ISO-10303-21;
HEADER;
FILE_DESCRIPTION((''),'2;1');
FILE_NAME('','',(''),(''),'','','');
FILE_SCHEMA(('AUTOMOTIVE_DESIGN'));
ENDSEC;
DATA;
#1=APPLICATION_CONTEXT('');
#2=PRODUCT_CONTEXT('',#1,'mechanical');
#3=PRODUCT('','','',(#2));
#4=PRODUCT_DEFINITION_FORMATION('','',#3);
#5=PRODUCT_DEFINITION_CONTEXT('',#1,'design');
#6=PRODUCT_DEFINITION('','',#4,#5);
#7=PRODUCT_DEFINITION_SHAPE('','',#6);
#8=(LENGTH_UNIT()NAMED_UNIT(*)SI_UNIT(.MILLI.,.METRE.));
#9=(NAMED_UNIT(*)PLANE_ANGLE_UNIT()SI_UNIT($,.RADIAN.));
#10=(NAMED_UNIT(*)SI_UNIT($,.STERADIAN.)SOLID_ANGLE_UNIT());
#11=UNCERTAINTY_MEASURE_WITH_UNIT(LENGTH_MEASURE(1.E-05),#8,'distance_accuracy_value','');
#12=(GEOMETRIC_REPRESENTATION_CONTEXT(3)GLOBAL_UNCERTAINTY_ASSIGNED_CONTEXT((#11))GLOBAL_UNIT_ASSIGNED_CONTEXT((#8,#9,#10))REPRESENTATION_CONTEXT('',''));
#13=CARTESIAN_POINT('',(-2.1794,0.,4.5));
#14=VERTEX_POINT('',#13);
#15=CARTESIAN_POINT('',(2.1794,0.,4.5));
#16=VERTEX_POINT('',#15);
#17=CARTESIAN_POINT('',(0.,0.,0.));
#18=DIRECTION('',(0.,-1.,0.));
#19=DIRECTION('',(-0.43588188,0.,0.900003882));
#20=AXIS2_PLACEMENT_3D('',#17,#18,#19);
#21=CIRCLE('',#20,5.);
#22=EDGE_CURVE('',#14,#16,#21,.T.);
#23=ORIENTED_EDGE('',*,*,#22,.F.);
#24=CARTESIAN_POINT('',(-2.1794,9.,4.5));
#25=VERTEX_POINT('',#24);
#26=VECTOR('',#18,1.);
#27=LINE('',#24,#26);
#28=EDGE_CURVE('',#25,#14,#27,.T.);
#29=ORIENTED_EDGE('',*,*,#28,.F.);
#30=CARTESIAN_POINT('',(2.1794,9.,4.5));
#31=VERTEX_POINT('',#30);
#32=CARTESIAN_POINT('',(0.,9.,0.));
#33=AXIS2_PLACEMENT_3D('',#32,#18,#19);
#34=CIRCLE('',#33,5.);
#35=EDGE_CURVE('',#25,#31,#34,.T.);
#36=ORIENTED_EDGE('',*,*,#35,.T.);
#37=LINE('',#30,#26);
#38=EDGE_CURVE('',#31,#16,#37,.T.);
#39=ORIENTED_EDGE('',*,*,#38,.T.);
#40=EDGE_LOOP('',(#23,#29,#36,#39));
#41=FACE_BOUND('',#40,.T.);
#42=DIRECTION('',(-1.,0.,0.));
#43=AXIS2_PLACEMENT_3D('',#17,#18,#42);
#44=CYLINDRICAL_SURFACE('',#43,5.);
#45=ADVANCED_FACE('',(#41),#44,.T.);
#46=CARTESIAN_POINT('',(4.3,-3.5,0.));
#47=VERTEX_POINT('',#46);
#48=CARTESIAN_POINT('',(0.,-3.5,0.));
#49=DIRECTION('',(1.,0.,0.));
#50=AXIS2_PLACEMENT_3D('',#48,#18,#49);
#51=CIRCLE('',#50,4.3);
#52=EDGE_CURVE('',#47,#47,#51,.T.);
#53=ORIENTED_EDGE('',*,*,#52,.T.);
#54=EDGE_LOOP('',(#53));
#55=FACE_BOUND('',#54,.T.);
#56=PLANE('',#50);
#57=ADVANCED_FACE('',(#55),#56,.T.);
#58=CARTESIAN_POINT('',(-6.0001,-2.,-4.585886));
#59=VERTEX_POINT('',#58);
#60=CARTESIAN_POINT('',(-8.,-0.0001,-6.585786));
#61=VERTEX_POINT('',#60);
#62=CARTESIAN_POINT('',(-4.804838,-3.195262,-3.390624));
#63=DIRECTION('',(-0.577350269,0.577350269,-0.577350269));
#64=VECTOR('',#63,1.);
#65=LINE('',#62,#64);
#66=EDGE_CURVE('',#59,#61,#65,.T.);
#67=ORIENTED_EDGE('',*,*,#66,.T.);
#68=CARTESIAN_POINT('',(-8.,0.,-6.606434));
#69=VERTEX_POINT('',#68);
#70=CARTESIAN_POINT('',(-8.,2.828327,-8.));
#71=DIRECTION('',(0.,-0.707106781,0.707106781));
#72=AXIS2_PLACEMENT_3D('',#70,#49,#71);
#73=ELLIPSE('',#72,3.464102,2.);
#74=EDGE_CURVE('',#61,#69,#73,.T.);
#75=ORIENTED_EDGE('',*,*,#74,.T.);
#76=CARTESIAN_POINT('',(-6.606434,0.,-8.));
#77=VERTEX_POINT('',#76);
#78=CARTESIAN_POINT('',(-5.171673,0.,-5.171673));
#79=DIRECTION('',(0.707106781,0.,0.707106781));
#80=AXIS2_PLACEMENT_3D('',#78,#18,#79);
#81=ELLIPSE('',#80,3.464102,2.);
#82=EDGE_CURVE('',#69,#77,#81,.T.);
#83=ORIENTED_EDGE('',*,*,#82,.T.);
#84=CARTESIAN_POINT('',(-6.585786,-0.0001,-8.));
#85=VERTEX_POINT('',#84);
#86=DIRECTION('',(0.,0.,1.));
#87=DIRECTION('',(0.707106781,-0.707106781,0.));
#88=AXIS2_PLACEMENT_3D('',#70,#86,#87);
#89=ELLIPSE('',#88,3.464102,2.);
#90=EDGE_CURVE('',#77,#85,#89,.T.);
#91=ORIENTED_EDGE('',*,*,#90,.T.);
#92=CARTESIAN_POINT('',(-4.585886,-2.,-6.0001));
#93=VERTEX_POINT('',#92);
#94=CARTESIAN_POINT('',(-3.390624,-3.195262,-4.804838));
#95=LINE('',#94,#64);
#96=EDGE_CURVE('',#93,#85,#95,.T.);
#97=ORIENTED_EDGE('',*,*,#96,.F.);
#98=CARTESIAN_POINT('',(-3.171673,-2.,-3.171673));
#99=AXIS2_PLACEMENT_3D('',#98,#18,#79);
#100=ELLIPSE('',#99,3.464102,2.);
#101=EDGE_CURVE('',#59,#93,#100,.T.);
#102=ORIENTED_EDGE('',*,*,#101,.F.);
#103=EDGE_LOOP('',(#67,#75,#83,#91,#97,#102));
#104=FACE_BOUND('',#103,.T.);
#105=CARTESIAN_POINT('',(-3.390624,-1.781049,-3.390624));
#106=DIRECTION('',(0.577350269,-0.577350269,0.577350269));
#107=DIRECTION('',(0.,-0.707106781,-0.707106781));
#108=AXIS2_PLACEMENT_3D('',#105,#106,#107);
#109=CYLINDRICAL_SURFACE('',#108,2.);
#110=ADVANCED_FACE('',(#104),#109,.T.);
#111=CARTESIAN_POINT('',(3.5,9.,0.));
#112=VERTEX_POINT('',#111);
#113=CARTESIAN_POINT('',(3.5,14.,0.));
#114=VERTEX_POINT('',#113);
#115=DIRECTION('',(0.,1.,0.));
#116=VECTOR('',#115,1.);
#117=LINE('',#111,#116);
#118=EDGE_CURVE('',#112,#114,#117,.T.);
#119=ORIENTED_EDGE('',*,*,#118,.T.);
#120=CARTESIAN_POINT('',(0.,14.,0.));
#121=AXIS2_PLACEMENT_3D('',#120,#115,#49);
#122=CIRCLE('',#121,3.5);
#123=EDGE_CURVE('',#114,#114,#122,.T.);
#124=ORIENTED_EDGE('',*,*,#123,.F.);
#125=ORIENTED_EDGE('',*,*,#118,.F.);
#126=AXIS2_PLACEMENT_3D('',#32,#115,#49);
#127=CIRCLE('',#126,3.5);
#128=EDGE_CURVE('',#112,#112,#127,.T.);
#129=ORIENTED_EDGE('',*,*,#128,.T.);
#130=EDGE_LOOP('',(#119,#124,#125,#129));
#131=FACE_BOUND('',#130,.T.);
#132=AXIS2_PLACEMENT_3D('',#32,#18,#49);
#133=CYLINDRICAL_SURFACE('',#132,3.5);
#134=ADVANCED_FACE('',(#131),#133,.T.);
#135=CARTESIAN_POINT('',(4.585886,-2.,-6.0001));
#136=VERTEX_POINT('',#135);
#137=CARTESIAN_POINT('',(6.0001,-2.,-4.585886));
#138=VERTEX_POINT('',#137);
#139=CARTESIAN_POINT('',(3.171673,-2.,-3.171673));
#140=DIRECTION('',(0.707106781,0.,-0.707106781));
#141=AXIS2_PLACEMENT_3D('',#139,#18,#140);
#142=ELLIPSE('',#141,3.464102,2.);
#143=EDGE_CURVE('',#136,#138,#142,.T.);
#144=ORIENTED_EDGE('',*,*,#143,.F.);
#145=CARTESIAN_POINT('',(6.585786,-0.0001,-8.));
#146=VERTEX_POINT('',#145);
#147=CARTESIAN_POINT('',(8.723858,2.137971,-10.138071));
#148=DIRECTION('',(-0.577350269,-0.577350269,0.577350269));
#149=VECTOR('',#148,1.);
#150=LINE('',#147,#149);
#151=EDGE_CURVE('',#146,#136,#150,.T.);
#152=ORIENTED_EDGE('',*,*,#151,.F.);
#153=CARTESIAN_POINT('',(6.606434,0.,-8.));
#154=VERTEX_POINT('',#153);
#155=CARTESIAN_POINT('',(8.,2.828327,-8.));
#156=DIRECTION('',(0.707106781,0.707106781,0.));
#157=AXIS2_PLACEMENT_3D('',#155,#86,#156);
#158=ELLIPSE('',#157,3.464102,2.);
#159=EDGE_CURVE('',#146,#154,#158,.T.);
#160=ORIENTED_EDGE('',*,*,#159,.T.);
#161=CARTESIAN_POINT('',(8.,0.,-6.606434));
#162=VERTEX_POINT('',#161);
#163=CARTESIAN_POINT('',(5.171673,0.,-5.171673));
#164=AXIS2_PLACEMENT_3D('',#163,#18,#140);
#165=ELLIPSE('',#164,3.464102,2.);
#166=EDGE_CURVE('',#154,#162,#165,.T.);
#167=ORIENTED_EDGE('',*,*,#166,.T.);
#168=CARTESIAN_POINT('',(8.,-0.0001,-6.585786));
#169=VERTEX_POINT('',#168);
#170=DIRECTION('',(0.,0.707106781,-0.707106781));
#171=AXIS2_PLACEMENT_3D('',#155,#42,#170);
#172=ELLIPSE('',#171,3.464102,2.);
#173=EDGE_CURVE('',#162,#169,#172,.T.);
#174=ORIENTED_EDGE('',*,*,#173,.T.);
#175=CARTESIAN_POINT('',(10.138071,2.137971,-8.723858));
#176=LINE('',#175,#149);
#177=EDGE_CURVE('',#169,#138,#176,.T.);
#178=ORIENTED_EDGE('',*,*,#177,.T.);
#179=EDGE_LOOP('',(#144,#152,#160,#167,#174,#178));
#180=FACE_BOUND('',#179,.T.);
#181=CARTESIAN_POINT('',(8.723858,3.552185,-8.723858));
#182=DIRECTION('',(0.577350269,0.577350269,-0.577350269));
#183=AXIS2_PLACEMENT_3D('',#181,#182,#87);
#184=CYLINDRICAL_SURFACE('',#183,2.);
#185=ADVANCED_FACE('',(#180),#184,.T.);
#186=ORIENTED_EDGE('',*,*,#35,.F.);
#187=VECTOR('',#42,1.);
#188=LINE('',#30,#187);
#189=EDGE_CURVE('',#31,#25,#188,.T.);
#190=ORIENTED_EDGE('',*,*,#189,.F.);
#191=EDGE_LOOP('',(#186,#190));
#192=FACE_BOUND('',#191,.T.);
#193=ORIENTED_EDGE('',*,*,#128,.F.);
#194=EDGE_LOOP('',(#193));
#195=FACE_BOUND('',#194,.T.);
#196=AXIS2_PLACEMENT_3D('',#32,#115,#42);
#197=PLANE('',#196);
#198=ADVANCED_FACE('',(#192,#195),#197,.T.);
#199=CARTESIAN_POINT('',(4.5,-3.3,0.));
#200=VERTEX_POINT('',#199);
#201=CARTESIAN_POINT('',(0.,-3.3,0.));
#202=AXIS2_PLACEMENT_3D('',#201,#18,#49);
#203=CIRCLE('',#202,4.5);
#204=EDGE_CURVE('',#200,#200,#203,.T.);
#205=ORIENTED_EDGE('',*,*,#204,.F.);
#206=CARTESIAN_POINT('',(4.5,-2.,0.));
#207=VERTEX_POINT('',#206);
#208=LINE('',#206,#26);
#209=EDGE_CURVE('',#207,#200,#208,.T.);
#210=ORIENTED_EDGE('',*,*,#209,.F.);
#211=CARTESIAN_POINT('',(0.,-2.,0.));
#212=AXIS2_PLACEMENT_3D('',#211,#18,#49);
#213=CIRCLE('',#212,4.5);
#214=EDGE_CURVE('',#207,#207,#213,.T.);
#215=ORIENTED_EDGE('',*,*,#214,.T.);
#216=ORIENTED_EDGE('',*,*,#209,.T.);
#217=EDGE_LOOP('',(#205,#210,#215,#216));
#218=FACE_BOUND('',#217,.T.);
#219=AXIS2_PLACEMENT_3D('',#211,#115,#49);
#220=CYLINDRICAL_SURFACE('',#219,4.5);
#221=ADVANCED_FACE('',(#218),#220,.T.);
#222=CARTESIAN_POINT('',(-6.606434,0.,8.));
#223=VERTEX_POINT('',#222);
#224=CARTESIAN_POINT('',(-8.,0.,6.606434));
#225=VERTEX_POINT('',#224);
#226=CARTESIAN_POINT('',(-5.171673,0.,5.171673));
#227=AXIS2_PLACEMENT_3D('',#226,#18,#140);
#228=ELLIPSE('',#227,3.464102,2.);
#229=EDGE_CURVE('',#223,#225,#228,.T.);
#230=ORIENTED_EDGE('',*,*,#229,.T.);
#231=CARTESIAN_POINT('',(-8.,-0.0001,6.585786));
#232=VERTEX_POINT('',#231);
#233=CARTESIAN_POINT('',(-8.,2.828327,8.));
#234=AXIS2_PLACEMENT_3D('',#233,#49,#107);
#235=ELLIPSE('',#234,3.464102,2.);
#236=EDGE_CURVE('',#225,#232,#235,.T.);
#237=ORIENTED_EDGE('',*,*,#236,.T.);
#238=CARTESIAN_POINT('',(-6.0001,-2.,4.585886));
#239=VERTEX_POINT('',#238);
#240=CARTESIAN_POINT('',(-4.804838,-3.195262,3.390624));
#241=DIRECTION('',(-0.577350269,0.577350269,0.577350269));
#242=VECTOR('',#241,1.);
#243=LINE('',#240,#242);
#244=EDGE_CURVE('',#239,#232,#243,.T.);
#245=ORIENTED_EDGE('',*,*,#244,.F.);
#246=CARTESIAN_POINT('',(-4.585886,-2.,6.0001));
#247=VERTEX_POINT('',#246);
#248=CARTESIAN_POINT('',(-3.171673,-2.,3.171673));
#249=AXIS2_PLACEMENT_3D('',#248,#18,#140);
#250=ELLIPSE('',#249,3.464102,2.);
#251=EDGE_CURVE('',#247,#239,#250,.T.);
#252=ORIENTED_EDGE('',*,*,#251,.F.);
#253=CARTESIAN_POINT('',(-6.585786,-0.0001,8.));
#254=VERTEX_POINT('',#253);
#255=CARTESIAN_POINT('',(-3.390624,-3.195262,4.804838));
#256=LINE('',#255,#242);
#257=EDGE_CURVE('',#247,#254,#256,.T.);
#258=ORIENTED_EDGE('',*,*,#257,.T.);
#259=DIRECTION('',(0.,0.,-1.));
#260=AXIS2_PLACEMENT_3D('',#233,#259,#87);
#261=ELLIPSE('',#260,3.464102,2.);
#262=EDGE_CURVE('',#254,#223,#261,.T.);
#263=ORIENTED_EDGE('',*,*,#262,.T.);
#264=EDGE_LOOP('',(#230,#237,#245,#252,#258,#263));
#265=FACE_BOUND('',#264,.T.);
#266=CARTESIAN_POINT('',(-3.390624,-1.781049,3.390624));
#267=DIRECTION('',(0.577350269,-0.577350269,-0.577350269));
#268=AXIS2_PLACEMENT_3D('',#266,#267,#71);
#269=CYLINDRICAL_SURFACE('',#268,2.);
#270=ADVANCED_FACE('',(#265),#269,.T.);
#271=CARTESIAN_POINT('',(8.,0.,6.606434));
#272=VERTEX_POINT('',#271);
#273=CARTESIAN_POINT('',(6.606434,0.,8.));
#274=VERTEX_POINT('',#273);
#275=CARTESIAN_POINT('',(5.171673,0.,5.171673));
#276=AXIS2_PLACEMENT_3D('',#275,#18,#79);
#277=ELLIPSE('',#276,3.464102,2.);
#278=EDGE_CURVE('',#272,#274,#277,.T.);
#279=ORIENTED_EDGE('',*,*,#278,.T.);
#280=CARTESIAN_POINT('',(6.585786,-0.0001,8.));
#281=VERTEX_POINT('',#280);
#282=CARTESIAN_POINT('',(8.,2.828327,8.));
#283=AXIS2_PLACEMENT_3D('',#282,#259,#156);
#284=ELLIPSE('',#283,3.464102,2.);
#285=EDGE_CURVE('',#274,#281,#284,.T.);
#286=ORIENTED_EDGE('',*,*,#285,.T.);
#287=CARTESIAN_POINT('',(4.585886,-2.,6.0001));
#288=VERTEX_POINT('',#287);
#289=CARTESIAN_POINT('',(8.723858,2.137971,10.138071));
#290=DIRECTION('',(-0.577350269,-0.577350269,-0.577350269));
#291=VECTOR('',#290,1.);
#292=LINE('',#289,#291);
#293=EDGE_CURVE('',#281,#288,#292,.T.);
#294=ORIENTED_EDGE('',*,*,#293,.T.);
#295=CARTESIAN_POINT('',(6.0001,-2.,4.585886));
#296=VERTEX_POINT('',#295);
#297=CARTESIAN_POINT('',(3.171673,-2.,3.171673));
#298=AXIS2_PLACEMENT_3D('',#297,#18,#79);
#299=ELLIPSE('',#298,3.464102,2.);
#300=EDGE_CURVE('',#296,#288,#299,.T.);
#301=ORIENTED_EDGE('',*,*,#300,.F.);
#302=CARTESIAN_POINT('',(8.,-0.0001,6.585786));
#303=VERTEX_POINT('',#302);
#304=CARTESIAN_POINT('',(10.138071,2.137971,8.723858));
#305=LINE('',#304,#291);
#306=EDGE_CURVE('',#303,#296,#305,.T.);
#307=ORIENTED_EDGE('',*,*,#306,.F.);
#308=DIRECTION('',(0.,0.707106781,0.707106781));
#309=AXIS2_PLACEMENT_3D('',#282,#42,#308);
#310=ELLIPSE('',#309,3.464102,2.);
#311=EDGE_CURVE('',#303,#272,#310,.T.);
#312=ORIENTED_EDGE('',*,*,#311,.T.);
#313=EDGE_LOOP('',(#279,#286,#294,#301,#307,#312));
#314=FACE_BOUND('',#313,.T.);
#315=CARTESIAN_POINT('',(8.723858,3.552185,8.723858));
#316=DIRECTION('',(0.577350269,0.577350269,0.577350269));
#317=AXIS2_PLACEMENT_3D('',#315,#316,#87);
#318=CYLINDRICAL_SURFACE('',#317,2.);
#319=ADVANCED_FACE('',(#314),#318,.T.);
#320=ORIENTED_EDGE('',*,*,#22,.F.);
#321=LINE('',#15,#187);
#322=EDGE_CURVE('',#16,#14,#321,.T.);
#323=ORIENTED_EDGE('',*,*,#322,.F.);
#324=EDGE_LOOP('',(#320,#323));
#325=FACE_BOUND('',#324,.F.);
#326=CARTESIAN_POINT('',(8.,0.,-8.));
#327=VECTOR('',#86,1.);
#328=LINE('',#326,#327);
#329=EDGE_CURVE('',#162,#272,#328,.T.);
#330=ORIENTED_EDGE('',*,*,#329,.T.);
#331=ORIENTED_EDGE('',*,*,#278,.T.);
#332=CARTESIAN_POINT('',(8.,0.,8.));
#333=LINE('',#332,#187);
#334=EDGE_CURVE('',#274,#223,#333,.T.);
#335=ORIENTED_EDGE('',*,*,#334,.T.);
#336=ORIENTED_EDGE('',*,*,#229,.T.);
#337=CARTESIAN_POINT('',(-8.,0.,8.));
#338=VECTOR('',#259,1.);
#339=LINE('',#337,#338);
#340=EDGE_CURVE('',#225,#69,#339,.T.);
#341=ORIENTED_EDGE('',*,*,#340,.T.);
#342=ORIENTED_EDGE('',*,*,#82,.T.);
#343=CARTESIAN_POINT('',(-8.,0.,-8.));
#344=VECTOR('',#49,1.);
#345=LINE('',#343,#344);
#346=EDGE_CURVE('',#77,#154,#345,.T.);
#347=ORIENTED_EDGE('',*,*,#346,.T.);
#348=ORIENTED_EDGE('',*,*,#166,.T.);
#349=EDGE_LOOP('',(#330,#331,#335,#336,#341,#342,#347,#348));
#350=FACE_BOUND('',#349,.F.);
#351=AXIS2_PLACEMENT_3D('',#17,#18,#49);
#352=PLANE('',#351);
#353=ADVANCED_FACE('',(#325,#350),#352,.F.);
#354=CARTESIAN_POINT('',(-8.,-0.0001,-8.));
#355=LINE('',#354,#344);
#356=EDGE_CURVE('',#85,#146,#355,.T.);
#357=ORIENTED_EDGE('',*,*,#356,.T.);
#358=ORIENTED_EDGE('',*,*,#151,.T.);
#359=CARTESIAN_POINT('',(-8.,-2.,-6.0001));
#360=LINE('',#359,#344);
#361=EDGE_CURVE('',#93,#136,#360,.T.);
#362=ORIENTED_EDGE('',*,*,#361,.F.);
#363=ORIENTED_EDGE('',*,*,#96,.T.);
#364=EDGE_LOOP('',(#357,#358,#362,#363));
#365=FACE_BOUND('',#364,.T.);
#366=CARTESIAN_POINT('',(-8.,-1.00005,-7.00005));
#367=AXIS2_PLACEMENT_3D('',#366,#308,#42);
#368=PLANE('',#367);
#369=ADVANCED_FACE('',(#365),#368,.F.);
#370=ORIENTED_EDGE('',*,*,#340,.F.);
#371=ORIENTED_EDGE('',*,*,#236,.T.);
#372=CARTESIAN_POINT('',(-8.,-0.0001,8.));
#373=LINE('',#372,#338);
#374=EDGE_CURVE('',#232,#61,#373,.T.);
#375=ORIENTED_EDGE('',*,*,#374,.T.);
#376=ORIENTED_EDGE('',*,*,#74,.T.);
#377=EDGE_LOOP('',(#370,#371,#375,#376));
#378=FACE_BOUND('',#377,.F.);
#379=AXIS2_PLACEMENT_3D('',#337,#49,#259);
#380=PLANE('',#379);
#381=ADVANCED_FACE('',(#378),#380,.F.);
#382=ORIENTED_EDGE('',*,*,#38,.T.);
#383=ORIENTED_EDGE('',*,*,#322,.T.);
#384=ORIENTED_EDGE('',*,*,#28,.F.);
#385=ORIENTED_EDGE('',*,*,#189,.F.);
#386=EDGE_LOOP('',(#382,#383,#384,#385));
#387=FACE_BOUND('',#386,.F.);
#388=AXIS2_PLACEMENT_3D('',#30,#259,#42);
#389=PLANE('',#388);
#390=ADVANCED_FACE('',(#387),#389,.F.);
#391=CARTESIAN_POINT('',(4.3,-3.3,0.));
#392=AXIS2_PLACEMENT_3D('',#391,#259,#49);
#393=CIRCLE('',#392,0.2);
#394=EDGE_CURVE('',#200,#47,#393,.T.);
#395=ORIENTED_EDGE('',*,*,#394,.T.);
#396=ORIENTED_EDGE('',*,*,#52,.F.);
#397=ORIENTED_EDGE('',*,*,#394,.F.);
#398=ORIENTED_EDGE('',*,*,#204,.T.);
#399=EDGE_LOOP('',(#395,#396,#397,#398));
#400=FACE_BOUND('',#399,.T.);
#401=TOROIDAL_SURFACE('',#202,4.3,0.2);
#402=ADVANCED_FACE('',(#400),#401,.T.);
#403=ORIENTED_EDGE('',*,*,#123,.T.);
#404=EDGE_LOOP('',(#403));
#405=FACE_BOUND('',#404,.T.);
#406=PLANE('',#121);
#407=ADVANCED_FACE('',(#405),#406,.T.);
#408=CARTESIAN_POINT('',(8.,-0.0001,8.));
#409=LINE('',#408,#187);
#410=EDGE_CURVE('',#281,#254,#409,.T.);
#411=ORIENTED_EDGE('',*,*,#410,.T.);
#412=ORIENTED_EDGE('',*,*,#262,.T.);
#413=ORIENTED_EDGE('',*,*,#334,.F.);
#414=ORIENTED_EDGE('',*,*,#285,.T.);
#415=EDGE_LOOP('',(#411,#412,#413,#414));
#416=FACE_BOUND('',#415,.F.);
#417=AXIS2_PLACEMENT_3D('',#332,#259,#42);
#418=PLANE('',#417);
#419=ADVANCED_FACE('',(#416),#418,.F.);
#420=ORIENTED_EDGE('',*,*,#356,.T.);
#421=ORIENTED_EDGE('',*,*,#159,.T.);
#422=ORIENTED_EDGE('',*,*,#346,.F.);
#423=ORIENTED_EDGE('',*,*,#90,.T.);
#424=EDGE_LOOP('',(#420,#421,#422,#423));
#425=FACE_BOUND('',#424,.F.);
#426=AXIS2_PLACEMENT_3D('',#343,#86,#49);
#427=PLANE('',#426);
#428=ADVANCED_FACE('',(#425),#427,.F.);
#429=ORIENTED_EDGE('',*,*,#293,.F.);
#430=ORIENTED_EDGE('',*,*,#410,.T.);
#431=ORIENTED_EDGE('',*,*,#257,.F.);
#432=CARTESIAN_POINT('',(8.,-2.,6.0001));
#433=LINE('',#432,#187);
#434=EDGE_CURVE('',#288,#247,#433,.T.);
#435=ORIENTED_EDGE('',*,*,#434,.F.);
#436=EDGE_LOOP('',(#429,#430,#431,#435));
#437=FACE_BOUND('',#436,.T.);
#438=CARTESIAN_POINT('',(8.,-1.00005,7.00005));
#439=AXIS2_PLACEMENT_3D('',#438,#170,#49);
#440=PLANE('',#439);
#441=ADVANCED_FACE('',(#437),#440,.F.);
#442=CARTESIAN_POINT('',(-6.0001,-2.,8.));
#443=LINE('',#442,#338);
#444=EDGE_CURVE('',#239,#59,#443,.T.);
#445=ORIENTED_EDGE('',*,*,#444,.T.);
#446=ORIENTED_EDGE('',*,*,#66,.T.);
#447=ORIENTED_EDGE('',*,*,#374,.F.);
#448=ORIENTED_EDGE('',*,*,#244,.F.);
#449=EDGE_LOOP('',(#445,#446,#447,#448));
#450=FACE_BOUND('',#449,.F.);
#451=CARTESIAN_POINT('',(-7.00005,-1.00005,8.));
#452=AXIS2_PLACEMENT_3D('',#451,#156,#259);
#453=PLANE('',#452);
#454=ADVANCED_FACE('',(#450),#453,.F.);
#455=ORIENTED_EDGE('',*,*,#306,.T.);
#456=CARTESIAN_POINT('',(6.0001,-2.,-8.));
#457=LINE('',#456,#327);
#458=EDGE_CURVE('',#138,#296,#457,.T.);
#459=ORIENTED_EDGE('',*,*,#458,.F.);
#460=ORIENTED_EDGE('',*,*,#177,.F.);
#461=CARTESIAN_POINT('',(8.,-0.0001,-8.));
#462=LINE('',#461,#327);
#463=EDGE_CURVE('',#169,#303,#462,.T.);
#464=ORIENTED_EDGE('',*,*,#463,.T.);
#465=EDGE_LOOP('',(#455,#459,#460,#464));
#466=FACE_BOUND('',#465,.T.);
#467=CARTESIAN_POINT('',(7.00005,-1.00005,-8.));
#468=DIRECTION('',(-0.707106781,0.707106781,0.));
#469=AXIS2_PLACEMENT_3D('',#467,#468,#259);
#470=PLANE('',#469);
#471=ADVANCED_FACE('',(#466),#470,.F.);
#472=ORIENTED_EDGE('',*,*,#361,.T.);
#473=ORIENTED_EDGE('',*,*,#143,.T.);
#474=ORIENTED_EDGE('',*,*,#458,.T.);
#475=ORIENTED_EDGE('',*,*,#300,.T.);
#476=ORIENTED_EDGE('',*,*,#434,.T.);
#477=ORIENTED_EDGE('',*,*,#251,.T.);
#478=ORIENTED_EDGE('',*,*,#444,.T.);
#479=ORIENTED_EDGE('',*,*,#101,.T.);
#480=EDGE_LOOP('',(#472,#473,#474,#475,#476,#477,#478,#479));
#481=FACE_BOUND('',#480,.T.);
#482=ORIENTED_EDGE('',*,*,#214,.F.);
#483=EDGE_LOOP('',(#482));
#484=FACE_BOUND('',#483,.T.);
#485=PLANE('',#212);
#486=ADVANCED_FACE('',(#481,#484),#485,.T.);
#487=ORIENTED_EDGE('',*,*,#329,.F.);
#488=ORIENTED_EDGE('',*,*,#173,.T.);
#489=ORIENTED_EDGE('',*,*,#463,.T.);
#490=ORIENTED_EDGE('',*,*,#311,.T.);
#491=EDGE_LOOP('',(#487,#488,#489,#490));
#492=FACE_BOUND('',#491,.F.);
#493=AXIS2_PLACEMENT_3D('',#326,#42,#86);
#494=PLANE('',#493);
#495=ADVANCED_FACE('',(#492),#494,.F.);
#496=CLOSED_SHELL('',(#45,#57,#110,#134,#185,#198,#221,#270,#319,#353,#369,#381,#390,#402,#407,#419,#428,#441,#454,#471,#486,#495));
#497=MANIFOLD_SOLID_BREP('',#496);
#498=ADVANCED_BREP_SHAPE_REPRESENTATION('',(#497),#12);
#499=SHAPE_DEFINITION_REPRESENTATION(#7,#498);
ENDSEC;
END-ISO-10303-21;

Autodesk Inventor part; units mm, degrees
ref_plane "YZ Plane" through (0, 0, 0) normal (1, 0, 0) x (0, 1, 0)
ref_plane "XZ Plane" through (0, 0, 0) normal (0, 1, 0) x (-1, 0, 0)
ref_plane "XY Plane" through (0, 0, 0) normal (0, 0, 1) x (1, 0, 0)
sketch "Sketch1" plane through (0, 0, 0) normal (0, 1, 0) x (-1, 0, 0)
  circle A0 centre (0, 0) radius 5
  dimension "d0" = 10
extrude "Extrusion1" add sketch "Sketch1" along normal blind 9
sketch "Sketch2" plane through (0, 9, 0) normal (0, 1, 0) x (1, 0, 0)
  circle A0 centre (0, 0) radius 3.5
  dimension "d3" = 7
extrude "Extrusion2" add sketch "Sketch2" along normal blind 5
sketch "Sketch3" plane through (0, 0, 0) normal (0, -1, 0) x (1, 0, 0)
  line L0 (8, 8) -> (-8, 8)
  line L1 (-8, 8) -> (-8, -8)
  line L2 (-8, -8) -> (8, -8)
  line L3 (8, -8) -> (8, 8)
  point P0 (0, 0)
  dimension "d6" = 16
  dimension "d7" = 16
  dimension "d8" = 8
  dimension "d9" = 8
extrude "Extrusion3" add sketch "Sketch3" along normal blind 2
chamfer "Chamfer1" distance 2 angle 45 4 edges at (-8, -2, 0) (0, -2, 8) (8, -2, 0) (0, -2, -8)
fillet "Fillet1" radius 2 4 edges at (7, -1.0001, 7.0001) (-7.0001, -1.0001, 7) (-7, -1.0001, -7.0001) (7.0001, -1.0001, -7)
sketch "Sketch4" plane through (0, -2, 0) normal (0, -1, 0) x (1, 0, 0)
  circle A0 centre (0, 0) radius 4.5
  dimension "d16" = 9
extrude "Extrusion4" add sketch "Sketch4" along normal blind 1.5
fillet "Fillet2" radius 0.2 1 edges at (-4.5, -3.5, 0)
sketch "Sketch5" plane through (0, 9, 0) normal (0, 1, 0) x (1, 0, 0)
  circle A0 centre (0, 0) radius 5 projected
  line L0 (2.1794, -4.5) -> (-2.1794, -4.5)
  arc A1 (-2.1794, -4.5) -> (2.1794, -4.5) centre (0, 0) ccw
  dimension "d20" = 4.5
extrude "Extrusion5" cut sketch "Sketch5" against normal blind 9 contours L0 A0 picked at (-0.3727, -4.6245)
properties part number "StartBtn"
